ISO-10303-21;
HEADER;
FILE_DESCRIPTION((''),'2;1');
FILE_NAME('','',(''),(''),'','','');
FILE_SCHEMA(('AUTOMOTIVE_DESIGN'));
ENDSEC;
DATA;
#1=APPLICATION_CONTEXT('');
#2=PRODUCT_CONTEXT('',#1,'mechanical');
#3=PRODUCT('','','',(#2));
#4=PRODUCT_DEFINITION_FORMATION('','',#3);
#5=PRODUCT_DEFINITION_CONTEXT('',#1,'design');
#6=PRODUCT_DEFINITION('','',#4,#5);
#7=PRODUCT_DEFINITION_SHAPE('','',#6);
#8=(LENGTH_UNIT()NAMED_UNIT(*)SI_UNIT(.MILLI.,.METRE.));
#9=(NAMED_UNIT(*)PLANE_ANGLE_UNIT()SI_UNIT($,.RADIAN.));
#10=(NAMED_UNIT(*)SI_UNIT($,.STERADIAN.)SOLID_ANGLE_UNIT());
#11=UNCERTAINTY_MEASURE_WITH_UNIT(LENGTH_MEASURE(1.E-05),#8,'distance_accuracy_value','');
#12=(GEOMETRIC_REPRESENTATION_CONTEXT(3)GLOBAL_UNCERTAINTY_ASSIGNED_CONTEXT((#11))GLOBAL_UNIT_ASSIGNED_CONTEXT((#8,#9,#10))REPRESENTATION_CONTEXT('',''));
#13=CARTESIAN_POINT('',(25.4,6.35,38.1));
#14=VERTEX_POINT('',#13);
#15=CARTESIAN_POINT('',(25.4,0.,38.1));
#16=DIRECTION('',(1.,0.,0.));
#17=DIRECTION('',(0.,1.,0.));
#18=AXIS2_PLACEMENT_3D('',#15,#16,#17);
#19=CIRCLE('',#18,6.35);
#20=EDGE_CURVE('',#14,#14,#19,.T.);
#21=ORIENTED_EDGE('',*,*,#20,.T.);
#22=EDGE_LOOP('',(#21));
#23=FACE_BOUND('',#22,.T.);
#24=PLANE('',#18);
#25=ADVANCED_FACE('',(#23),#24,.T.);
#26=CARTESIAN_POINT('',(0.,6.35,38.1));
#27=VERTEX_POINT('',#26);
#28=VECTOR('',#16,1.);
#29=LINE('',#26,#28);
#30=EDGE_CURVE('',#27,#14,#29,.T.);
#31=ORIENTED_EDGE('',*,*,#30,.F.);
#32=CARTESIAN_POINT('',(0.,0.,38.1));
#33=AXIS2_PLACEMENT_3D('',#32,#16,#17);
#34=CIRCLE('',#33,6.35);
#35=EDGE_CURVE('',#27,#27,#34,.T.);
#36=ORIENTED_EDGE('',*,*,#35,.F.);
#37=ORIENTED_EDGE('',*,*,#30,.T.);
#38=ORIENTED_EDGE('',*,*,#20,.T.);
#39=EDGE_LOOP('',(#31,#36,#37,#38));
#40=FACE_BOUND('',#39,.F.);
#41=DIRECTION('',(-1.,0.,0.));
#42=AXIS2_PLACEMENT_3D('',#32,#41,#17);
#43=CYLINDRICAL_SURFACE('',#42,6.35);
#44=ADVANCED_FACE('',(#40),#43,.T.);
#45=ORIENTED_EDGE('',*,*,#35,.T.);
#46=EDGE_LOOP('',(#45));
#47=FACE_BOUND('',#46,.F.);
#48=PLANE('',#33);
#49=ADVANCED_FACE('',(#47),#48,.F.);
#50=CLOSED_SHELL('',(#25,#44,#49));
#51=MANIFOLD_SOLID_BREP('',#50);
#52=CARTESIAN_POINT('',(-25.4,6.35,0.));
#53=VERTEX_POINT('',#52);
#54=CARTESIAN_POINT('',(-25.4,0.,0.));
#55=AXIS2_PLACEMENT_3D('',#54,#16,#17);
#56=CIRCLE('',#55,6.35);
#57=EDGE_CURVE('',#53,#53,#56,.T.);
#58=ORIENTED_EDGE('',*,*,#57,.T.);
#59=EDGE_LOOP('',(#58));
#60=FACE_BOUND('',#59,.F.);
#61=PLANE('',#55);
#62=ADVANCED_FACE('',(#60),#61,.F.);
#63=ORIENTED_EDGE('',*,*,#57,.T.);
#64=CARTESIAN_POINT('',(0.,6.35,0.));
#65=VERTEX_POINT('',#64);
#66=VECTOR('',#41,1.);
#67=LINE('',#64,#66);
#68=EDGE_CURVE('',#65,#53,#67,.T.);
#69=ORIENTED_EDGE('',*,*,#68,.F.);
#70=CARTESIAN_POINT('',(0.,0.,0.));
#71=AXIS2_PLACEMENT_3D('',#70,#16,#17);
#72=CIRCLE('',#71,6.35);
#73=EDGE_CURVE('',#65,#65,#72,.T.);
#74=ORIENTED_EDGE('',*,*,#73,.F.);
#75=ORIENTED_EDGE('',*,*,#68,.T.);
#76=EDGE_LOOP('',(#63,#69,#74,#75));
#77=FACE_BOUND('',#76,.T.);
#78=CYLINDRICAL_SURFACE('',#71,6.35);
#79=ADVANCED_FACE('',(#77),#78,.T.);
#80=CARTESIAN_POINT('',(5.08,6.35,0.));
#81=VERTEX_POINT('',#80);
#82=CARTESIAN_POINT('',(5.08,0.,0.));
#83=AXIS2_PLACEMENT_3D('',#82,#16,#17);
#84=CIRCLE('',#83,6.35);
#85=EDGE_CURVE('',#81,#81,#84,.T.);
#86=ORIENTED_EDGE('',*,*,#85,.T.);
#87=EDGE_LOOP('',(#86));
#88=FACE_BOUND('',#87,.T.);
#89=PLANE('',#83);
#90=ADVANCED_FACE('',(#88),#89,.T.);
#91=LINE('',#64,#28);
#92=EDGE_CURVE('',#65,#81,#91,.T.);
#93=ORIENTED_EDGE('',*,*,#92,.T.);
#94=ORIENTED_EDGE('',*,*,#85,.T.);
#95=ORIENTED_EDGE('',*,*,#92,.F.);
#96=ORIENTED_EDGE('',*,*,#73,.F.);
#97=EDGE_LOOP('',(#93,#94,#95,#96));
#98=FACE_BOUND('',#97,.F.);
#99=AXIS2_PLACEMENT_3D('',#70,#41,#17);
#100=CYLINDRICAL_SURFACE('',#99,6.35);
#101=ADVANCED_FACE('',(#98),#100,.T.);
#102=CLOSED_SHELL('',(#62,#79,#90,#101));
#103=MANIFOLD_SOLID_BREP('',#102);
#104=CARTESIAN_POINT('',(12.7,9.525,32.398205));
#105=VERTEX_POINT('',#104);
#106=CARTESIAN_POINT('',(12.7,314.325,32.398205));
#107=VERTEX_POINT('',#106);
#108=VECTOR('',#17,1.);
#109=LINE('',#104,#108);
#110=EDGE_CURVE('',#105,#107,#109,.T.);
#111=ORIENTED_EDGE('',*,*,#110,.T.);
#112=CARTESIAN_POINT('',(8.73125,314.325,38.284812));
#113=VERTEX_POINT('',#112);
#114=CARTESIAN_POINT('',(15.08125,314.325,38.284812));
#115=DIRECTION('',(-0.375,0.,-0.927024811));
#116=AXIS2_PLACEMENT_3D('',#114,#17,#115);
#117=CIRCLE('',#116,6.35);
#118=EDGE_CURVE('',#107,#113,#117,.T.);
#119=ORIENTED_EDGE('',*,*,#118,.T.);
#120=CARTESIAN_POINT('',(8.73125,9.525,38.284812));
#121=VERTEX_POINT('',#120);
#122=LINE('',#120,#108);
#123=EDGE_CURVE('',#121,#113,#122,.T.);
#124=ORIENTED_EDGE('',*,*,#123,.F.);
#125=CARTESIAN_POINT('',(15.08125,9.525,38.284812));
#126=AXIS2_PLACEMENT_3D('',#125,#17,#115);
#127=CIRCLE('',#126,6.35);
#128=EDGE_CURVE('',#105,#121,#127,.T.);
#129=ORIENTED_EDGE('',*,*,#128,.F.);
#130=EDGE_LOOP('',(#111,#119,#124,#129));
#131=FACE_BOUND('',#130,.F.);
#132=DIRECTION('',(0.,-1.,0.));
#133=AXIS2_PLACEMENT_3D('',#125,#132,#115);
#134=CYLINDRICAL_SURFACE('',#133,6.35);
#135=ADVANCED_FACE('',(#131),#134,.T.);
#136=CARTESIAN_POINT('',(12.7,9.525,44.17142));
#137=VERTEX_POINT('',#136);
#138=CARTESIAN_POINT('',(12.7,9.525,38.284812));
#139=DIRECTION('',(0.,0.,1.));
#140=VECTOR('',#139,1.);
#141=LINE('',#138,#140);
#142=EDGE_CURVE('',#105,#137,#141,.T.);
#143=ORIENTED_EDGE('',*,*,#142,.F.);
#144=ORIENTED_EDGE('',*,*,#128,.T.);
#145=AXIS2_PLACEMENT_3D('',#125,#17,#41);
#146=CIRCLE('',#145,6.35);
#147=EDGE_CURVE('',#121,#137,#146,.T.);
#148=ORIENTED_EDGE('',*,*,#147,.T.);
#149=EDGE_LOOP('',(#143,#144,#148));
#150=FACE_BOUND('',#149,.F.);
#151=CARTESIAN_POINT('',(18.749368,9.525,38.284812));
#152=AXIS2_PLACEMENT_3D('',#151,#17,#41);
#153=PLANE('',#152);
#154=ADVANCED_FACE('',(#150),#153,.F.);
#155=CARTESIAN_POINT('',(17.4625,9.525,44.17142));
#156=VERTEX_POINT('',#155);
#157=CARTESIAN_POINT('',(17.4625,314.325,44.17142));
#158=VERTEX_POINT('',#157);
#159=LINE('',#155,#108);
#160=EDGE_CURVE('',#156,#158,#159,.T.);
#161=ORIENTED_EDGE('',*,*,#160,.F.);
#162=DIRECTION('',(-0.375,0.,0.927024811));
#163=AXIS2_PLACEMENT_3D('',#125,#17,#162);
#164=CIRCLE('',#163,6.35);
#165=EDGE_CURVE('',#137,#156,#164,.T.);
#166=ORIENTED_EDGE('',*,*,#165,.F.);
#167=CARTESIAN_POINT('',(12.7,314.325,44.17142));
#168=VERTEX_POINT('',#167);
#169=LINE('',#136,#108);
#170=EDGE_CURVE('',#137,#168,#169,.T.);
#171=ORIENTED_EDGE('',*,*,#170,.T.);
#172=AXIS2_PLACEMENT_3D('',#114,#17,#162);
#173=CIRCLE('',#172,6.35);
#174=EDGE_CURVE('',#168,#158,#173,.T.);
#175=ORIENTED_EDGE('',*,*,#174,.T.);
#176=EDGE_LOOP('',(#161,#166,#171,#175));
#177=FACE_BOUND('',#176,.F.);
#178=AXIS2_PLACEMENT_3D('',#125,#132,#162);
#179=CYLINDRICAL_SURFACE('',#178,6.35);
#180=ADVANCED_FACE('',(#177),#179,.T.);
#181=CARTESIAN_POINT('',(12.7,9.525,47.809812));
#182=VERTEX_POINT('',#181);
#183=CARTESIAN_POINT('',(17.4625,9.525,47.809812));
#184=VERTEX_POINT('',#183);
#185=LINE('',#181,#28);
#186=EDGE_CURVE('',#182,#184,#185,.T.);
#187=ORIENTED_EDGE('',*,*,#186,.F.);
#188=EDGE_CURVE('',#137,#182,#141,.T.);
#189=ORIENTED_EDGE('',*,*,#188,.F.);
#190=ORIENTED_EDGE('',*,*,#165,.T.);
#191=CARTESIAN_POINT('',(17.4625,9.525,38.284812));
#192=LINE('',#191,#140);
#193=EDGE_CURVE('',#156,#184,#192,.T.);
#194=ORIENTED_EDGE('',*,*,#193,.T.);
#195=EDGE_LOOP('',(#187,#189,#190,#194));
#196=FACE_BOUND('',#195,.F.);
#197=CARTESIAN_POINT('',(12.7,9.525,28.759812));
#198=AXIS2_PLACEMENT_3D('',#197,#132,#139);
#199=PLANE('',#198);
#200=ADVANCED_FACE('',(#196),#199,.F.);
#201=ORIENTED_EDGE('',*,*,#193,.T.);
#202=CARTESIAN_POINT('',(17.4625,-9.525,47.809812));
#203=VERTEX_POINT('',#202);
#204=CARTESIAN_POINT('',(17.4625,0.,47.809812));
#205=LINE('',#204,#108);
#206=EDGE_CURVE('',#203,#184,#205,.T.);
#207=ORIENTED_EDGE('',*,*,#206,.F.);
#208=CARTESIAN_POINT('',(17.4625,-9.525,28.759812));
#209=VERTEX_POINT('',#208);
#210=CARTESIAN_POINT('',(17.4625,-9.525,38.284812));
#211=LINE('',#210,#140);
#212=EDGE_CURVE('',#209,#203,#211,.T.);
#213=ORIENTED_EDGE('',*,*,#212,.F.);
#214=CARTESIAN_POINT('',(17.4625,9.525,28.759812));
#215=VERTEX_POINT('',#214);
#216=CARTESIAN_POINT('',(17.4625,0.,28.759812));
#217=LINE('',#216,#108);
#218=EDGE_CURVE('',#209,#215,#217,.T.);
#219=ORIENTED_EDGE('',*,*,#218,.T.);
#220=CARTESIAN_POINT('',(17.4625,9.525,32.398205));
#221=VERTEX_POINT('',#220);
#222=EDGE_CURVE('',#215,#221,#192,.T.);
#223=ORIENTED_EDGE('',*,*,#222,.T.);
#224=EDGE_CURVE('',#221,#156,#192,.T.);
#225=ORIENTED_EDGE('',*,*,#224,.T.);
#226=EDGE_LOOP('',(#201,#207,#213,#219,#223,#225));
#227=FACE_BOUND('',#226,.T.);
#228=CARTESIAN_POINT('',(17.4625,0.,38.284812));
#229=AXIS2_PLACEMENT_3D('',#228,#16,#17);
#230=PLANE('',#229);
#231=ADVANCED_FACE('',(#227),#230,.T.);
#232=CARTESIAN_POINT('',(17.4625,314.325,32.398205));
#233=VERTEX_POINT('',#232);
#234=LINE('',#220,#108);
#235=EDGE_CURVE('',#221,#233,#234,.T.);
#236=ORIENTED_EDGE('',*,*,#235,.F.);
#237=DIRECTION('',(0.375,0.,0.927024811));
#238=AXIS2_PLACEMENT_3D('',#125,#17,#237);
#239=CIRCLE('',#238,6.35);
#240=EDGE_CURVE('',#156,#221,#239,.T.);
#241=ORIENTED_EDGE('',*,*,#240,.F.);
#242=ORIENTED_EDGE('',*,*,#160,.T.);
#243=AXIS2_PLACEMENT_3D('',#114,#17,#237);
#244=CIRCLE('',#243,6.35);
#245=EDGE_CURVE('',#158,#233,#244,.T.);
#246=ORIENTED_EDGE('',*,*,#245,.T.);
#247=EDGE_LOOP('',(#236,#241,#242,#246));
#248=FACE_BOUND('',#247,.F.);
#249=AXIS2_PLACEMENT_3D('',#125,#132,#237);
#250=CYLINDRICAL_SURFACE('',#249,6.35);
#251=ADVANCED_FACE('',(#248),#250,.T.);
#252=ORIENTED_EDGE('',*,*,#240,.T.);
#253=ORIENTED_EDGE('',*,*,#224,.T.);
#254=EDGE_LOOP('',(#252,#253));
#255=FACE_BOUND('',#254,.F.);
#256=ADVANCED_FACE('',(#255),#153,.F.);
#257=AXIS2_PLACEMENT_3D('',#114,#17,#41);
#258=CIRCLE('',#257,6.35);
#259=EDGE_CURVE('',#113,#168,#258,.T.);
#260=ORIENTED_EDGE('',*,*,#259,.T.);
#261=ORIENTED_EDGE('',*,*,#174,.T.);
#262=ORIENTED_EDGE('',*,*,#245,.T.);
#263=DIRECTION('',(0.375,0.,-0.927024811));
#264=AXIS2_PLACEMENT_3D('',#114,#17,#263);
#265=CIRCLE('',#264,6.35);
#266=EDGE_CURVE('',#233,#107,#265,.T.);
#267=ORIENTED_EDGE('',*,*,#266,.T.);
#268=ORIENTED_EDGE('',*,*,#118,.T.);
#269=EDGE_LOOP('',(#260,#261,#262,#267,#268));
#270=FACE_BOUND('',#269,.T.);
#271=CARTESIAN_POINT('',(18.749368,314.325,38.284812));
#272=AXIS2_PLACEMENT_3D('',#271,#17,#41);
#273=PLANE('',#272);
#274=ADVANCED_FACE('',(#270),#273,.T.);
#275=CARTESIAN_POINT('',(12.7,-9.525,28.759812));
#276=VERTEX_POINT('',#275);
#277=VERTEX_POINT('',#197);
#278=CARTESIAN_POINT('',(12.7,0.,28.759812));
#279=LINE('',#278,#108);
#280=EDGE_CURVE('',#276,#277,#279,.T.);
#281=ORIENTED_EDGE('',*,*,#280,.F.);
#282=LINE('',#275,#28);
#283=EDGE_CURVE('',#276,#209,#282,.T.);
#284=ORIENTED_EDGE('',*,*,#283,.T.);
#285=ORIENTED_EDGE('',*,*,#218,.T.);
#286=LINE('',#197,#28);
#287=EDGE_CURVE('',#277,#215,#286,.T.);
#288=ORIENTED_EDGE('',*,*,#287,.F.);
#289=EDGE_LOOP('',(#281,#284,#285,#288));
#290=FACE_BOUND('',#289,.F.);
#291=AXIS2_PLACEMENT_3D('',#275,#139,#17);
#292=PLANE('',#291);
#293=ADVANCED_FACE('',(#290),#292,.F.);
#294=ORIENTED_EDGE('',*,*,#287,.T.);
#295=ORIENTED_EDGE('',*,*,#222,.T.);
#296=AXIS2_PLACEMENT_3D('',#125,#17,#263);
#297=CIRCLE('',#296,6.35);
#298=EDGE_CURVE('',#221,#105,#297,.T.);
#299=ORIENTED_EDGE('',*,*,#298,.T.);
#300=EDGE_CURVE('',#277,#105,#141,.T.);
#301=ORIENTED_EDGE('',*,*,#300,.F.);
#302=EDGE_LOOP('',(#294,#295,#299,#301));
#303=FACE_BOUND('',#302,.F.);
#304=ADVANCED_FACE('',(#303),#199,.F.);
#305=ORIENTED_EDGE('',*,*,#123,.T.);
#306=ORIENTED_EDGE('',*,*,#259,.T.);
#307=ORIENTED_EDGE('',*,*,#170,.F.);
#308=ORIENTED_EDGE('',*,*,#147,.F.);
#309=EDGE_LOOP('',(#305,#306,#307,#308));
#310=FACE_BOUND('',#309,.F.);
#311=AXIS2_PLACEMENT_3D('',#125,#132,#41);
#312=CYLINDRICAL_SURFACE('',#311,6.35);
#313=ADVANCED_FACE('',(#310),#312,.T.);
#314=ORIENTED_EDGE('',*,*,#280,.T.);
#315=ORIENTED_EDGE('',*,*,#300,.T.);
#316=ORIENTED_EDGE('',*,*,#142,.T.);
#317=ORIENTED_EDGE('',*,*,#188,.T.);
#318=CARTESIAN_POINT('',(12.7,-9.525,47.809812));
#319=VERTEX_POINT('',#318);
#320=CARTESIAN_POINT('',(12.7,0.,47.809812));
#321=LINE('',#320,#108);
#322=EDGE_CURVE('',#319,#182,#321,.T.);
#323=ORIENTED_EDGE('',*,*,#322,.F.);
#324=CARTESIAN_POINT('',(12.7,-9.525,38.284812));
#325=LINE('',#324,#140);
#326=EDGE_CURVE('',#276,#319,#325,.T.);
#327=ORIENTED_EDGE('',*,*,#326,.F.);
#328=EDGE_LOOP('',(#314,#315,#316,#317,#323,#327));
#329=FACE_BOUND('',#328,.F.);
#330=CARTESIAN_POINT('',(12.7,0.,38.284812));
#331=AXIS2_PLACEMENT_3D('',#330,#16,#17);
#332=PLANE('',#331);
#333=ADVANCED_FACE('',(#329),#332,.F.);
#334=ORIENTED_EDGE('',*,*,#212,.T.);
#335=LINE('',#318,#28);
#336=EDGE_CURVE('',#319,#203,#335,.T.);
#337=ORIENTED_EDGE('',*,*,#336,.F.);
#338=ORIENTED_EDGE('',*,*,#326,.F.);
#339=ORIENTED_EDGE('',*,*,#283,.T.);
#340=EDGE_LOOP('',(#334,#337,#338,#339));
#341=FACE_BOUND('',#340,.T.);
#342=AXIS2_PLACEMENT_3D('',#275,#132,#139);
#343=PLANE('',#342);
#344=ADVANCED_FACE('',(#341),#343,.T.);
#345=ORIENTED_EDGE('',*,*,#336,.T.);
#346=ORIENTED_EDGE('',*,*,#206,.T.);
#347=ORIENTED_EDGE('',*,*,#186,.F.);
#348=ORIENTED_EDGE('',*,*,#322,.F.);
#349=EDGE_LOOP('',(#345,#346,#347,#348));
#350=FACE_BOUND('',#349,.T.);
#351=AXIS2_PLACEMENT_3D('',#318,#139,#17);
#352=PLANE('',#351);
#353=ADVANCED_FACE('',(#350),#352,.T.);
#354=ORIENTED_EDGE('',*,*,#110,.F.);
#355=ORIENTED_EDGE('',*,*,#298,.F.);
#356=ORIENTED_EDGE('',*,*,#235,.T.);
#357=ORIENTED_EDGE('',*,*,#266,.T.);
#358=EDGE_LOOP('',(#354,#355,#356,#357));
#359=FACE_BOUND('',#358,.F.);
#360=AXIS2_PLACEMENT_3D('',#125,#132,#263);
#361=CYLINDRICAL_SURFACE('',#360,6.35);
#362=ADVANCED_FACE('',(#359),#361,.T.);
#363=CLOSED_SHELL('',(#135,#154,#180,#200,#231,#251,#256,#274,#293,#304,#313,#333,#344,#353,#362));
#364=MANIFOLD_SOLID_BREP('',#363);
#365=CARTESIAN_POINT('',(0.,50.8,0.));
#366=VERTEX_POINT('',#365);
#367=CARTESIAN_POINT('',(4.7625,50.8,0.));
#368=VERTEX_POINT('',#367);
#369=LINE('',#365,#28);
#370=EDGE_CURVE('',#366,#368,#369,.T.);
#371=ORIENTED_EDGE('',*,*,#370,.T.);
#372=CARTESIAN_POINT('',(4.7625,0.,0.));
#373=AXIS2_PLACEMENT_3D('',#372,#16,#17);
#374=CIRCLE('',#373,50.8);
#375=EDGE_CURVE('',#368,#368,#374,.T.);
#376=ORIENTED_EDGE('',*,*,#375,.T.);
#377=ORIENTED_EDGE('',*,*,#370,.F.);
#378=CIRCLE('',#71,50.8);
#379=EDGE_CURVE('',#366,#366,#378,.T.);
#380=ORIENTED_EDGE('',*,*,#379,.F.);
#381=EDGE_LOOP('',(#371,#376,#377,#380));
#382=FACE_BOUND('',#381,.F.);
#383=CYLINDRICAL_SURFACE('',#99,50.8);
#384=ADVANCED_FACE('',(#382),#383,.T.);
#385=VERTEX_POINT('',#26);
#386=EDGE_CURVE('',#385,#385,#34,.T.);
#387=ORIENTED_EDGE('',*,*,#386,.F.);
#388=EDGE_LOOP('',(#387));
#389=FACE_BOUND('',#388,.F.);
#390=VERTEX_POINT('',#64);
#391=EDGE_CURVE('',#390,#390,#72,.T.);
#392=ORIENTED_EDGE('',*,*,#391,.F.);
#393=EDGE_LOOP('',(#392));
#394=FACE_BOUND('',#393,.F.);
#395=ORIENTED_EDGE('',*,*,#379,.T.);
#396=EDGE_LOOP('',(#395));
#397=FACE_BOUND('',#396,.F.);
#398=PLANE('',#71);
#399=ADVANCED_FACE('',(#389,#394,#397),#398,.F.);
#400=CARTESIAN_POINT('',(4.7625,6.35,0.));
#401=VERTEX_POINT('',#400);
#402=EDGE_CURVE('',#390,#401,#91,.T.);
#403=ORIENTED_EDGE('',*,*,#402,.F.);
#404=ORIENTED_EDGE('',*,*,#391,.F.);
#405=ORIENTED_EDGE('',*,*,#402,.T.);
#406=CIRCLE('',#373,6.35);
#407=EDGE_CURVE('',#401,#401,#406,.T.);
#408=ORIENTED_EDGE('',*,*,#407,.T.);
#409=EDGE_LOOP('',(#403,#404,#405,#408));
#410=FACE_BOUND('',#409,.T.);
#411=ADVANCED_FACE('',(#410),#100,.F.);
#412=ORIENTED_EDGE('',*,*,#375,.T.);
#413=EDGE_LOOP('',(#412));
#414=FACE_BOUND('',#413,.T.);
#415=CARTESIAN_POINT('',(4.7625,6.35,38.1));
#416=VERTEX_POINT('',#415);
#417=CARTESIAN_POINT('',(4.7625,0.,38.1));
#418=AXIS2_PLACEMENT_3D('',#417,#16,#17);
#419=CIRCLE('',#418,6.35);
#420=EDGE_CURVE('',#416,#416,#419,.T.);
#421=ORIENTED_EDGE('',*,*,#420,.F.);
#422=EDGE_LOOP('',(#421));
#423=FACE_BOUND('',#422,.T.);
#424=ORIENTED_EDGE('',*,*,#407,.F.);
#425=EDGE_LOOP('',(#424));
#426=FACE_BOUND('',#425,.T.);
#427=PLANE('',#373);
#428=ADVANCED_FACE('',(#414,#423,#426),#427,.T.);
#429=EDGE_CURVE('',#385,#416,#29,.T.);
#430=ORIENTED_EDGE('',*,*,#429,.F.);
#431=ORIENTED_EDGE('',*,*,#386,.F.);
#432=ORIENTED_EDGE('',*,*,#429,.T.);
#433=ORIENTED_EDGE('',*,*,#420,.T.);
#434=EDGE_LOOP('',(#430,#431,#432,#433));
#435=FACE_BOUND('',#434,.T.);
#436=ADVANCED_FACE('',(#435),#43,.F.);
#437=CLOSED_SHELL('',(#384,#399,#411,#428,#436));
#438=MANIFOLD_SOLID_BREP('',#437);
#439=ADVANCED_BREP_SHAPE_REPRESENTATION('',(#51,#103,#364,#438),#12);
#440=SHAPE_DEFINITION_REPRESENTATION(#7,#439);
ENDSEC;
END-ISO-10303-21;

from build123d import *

# Parameters (mm, degrees)
F0_R          = 50.8
F0_R_2        = 6.35
F1_DEPTH      = 4.7625
F2_DEPTH      = 25.4
F4_W          = 19.05
F4_H          = 19.05
F5_DEPTH      = 4.7625
F7_DEPTH      = 304.8
F8_DEPTH      = 25.4
F8_DEPTH_BACK = 5.08


# Not quite as in the source:
# - a feature names something its author has since deleted; it is built from what else it names


with BuildPart() as f1:
    # F0 (on Right) → F1 (new body)
    with BuildSketch(Plane.YZ):
        Circle(F0_R)
        Circle(F0_R_2, mode=Mode.SUBTRACT)
        with Locations((0, 38.1)):
            Circle(F0_R_2, mode=Mode.SUBTRACT)
    extrude(amount=F1_DEPTH)


with BuildPart() as f2:
    # F0 (on Right) → F2 (new body)
    with BuildSketch(Plane.YZ):
        with Locations((0, 38.1)):
            Circle(F0_R_2)
    extrude(amount=F2_DEPTH)


with BuildPart() as f5:
    # F4 (on offset) → F5 (new body)
    with BuildSketch(Plane.YZ.offset(12.7)):
        with Locations((0, 38.2848121226)):
            Rectangle(F4_W, F4_H)
    extrude(amount=F5_DEPTH)

    # F6 (on face) → F7 (join)
    with BuildSketch(Plane(origin=(0, 9.525, 0), x_dir=(-1, 0, 0), z_dir=(0, 1, 0))):
        with BuildLine():
            Line((-17.4625, 32.3982045735), (-17.4625, 44.1714196717))
            ThreePointArc((-17.4625, 44.1714196717), (-21.43125, 38.2848121226), (-17.4625, 32.3982045735))
        make_face()
        with BuildLine():
            Line((-12.7, 32.3982045735), (-12.7, 44.1714196717))
            ThreePointArc((-12.7, 44.1714196717), (-15.08125, 44.6348121226), (-17.4625, 44.1714196717))
            Line((-17.4625, 44.1714196717), (-17.4625, 32.3982045735))
            ThreePointArc((-17.4625, 32.3982045735), (-15.08125, 31.9348121226), (-12.7, 32.3982045735))
        make_face()
        with BuildLine():
            ThreePointArc((-12.7, 32.3982045735), (-9.8161081453, 34.7350542083), (-8.73125, 38.2848121226))
            ThreePointArc((-8.73125, 38.2848121226), (-9.8161081453, 41.8345700369), (-12.7, 44.1714196717))
            Line((-12.7, 44.1714196717), (-12.7, 32.3982045735))
        make_face()
    extrude(amount=F7_DEPTH)


with BuildPart() as f8:
    # F0 (on Right) → F8 (new body, two sides)
    with BuildSketch(Plane.YZ) as f8_sk:
        Circle(F0_R_2)
    extrude(amount=-F8_DEPTH)
    extrude(f8_sk.sketch, amount=F8_DEPTH_BACK)


solid = Compound([f1.part, f2.part, f5.part, f8.part])
